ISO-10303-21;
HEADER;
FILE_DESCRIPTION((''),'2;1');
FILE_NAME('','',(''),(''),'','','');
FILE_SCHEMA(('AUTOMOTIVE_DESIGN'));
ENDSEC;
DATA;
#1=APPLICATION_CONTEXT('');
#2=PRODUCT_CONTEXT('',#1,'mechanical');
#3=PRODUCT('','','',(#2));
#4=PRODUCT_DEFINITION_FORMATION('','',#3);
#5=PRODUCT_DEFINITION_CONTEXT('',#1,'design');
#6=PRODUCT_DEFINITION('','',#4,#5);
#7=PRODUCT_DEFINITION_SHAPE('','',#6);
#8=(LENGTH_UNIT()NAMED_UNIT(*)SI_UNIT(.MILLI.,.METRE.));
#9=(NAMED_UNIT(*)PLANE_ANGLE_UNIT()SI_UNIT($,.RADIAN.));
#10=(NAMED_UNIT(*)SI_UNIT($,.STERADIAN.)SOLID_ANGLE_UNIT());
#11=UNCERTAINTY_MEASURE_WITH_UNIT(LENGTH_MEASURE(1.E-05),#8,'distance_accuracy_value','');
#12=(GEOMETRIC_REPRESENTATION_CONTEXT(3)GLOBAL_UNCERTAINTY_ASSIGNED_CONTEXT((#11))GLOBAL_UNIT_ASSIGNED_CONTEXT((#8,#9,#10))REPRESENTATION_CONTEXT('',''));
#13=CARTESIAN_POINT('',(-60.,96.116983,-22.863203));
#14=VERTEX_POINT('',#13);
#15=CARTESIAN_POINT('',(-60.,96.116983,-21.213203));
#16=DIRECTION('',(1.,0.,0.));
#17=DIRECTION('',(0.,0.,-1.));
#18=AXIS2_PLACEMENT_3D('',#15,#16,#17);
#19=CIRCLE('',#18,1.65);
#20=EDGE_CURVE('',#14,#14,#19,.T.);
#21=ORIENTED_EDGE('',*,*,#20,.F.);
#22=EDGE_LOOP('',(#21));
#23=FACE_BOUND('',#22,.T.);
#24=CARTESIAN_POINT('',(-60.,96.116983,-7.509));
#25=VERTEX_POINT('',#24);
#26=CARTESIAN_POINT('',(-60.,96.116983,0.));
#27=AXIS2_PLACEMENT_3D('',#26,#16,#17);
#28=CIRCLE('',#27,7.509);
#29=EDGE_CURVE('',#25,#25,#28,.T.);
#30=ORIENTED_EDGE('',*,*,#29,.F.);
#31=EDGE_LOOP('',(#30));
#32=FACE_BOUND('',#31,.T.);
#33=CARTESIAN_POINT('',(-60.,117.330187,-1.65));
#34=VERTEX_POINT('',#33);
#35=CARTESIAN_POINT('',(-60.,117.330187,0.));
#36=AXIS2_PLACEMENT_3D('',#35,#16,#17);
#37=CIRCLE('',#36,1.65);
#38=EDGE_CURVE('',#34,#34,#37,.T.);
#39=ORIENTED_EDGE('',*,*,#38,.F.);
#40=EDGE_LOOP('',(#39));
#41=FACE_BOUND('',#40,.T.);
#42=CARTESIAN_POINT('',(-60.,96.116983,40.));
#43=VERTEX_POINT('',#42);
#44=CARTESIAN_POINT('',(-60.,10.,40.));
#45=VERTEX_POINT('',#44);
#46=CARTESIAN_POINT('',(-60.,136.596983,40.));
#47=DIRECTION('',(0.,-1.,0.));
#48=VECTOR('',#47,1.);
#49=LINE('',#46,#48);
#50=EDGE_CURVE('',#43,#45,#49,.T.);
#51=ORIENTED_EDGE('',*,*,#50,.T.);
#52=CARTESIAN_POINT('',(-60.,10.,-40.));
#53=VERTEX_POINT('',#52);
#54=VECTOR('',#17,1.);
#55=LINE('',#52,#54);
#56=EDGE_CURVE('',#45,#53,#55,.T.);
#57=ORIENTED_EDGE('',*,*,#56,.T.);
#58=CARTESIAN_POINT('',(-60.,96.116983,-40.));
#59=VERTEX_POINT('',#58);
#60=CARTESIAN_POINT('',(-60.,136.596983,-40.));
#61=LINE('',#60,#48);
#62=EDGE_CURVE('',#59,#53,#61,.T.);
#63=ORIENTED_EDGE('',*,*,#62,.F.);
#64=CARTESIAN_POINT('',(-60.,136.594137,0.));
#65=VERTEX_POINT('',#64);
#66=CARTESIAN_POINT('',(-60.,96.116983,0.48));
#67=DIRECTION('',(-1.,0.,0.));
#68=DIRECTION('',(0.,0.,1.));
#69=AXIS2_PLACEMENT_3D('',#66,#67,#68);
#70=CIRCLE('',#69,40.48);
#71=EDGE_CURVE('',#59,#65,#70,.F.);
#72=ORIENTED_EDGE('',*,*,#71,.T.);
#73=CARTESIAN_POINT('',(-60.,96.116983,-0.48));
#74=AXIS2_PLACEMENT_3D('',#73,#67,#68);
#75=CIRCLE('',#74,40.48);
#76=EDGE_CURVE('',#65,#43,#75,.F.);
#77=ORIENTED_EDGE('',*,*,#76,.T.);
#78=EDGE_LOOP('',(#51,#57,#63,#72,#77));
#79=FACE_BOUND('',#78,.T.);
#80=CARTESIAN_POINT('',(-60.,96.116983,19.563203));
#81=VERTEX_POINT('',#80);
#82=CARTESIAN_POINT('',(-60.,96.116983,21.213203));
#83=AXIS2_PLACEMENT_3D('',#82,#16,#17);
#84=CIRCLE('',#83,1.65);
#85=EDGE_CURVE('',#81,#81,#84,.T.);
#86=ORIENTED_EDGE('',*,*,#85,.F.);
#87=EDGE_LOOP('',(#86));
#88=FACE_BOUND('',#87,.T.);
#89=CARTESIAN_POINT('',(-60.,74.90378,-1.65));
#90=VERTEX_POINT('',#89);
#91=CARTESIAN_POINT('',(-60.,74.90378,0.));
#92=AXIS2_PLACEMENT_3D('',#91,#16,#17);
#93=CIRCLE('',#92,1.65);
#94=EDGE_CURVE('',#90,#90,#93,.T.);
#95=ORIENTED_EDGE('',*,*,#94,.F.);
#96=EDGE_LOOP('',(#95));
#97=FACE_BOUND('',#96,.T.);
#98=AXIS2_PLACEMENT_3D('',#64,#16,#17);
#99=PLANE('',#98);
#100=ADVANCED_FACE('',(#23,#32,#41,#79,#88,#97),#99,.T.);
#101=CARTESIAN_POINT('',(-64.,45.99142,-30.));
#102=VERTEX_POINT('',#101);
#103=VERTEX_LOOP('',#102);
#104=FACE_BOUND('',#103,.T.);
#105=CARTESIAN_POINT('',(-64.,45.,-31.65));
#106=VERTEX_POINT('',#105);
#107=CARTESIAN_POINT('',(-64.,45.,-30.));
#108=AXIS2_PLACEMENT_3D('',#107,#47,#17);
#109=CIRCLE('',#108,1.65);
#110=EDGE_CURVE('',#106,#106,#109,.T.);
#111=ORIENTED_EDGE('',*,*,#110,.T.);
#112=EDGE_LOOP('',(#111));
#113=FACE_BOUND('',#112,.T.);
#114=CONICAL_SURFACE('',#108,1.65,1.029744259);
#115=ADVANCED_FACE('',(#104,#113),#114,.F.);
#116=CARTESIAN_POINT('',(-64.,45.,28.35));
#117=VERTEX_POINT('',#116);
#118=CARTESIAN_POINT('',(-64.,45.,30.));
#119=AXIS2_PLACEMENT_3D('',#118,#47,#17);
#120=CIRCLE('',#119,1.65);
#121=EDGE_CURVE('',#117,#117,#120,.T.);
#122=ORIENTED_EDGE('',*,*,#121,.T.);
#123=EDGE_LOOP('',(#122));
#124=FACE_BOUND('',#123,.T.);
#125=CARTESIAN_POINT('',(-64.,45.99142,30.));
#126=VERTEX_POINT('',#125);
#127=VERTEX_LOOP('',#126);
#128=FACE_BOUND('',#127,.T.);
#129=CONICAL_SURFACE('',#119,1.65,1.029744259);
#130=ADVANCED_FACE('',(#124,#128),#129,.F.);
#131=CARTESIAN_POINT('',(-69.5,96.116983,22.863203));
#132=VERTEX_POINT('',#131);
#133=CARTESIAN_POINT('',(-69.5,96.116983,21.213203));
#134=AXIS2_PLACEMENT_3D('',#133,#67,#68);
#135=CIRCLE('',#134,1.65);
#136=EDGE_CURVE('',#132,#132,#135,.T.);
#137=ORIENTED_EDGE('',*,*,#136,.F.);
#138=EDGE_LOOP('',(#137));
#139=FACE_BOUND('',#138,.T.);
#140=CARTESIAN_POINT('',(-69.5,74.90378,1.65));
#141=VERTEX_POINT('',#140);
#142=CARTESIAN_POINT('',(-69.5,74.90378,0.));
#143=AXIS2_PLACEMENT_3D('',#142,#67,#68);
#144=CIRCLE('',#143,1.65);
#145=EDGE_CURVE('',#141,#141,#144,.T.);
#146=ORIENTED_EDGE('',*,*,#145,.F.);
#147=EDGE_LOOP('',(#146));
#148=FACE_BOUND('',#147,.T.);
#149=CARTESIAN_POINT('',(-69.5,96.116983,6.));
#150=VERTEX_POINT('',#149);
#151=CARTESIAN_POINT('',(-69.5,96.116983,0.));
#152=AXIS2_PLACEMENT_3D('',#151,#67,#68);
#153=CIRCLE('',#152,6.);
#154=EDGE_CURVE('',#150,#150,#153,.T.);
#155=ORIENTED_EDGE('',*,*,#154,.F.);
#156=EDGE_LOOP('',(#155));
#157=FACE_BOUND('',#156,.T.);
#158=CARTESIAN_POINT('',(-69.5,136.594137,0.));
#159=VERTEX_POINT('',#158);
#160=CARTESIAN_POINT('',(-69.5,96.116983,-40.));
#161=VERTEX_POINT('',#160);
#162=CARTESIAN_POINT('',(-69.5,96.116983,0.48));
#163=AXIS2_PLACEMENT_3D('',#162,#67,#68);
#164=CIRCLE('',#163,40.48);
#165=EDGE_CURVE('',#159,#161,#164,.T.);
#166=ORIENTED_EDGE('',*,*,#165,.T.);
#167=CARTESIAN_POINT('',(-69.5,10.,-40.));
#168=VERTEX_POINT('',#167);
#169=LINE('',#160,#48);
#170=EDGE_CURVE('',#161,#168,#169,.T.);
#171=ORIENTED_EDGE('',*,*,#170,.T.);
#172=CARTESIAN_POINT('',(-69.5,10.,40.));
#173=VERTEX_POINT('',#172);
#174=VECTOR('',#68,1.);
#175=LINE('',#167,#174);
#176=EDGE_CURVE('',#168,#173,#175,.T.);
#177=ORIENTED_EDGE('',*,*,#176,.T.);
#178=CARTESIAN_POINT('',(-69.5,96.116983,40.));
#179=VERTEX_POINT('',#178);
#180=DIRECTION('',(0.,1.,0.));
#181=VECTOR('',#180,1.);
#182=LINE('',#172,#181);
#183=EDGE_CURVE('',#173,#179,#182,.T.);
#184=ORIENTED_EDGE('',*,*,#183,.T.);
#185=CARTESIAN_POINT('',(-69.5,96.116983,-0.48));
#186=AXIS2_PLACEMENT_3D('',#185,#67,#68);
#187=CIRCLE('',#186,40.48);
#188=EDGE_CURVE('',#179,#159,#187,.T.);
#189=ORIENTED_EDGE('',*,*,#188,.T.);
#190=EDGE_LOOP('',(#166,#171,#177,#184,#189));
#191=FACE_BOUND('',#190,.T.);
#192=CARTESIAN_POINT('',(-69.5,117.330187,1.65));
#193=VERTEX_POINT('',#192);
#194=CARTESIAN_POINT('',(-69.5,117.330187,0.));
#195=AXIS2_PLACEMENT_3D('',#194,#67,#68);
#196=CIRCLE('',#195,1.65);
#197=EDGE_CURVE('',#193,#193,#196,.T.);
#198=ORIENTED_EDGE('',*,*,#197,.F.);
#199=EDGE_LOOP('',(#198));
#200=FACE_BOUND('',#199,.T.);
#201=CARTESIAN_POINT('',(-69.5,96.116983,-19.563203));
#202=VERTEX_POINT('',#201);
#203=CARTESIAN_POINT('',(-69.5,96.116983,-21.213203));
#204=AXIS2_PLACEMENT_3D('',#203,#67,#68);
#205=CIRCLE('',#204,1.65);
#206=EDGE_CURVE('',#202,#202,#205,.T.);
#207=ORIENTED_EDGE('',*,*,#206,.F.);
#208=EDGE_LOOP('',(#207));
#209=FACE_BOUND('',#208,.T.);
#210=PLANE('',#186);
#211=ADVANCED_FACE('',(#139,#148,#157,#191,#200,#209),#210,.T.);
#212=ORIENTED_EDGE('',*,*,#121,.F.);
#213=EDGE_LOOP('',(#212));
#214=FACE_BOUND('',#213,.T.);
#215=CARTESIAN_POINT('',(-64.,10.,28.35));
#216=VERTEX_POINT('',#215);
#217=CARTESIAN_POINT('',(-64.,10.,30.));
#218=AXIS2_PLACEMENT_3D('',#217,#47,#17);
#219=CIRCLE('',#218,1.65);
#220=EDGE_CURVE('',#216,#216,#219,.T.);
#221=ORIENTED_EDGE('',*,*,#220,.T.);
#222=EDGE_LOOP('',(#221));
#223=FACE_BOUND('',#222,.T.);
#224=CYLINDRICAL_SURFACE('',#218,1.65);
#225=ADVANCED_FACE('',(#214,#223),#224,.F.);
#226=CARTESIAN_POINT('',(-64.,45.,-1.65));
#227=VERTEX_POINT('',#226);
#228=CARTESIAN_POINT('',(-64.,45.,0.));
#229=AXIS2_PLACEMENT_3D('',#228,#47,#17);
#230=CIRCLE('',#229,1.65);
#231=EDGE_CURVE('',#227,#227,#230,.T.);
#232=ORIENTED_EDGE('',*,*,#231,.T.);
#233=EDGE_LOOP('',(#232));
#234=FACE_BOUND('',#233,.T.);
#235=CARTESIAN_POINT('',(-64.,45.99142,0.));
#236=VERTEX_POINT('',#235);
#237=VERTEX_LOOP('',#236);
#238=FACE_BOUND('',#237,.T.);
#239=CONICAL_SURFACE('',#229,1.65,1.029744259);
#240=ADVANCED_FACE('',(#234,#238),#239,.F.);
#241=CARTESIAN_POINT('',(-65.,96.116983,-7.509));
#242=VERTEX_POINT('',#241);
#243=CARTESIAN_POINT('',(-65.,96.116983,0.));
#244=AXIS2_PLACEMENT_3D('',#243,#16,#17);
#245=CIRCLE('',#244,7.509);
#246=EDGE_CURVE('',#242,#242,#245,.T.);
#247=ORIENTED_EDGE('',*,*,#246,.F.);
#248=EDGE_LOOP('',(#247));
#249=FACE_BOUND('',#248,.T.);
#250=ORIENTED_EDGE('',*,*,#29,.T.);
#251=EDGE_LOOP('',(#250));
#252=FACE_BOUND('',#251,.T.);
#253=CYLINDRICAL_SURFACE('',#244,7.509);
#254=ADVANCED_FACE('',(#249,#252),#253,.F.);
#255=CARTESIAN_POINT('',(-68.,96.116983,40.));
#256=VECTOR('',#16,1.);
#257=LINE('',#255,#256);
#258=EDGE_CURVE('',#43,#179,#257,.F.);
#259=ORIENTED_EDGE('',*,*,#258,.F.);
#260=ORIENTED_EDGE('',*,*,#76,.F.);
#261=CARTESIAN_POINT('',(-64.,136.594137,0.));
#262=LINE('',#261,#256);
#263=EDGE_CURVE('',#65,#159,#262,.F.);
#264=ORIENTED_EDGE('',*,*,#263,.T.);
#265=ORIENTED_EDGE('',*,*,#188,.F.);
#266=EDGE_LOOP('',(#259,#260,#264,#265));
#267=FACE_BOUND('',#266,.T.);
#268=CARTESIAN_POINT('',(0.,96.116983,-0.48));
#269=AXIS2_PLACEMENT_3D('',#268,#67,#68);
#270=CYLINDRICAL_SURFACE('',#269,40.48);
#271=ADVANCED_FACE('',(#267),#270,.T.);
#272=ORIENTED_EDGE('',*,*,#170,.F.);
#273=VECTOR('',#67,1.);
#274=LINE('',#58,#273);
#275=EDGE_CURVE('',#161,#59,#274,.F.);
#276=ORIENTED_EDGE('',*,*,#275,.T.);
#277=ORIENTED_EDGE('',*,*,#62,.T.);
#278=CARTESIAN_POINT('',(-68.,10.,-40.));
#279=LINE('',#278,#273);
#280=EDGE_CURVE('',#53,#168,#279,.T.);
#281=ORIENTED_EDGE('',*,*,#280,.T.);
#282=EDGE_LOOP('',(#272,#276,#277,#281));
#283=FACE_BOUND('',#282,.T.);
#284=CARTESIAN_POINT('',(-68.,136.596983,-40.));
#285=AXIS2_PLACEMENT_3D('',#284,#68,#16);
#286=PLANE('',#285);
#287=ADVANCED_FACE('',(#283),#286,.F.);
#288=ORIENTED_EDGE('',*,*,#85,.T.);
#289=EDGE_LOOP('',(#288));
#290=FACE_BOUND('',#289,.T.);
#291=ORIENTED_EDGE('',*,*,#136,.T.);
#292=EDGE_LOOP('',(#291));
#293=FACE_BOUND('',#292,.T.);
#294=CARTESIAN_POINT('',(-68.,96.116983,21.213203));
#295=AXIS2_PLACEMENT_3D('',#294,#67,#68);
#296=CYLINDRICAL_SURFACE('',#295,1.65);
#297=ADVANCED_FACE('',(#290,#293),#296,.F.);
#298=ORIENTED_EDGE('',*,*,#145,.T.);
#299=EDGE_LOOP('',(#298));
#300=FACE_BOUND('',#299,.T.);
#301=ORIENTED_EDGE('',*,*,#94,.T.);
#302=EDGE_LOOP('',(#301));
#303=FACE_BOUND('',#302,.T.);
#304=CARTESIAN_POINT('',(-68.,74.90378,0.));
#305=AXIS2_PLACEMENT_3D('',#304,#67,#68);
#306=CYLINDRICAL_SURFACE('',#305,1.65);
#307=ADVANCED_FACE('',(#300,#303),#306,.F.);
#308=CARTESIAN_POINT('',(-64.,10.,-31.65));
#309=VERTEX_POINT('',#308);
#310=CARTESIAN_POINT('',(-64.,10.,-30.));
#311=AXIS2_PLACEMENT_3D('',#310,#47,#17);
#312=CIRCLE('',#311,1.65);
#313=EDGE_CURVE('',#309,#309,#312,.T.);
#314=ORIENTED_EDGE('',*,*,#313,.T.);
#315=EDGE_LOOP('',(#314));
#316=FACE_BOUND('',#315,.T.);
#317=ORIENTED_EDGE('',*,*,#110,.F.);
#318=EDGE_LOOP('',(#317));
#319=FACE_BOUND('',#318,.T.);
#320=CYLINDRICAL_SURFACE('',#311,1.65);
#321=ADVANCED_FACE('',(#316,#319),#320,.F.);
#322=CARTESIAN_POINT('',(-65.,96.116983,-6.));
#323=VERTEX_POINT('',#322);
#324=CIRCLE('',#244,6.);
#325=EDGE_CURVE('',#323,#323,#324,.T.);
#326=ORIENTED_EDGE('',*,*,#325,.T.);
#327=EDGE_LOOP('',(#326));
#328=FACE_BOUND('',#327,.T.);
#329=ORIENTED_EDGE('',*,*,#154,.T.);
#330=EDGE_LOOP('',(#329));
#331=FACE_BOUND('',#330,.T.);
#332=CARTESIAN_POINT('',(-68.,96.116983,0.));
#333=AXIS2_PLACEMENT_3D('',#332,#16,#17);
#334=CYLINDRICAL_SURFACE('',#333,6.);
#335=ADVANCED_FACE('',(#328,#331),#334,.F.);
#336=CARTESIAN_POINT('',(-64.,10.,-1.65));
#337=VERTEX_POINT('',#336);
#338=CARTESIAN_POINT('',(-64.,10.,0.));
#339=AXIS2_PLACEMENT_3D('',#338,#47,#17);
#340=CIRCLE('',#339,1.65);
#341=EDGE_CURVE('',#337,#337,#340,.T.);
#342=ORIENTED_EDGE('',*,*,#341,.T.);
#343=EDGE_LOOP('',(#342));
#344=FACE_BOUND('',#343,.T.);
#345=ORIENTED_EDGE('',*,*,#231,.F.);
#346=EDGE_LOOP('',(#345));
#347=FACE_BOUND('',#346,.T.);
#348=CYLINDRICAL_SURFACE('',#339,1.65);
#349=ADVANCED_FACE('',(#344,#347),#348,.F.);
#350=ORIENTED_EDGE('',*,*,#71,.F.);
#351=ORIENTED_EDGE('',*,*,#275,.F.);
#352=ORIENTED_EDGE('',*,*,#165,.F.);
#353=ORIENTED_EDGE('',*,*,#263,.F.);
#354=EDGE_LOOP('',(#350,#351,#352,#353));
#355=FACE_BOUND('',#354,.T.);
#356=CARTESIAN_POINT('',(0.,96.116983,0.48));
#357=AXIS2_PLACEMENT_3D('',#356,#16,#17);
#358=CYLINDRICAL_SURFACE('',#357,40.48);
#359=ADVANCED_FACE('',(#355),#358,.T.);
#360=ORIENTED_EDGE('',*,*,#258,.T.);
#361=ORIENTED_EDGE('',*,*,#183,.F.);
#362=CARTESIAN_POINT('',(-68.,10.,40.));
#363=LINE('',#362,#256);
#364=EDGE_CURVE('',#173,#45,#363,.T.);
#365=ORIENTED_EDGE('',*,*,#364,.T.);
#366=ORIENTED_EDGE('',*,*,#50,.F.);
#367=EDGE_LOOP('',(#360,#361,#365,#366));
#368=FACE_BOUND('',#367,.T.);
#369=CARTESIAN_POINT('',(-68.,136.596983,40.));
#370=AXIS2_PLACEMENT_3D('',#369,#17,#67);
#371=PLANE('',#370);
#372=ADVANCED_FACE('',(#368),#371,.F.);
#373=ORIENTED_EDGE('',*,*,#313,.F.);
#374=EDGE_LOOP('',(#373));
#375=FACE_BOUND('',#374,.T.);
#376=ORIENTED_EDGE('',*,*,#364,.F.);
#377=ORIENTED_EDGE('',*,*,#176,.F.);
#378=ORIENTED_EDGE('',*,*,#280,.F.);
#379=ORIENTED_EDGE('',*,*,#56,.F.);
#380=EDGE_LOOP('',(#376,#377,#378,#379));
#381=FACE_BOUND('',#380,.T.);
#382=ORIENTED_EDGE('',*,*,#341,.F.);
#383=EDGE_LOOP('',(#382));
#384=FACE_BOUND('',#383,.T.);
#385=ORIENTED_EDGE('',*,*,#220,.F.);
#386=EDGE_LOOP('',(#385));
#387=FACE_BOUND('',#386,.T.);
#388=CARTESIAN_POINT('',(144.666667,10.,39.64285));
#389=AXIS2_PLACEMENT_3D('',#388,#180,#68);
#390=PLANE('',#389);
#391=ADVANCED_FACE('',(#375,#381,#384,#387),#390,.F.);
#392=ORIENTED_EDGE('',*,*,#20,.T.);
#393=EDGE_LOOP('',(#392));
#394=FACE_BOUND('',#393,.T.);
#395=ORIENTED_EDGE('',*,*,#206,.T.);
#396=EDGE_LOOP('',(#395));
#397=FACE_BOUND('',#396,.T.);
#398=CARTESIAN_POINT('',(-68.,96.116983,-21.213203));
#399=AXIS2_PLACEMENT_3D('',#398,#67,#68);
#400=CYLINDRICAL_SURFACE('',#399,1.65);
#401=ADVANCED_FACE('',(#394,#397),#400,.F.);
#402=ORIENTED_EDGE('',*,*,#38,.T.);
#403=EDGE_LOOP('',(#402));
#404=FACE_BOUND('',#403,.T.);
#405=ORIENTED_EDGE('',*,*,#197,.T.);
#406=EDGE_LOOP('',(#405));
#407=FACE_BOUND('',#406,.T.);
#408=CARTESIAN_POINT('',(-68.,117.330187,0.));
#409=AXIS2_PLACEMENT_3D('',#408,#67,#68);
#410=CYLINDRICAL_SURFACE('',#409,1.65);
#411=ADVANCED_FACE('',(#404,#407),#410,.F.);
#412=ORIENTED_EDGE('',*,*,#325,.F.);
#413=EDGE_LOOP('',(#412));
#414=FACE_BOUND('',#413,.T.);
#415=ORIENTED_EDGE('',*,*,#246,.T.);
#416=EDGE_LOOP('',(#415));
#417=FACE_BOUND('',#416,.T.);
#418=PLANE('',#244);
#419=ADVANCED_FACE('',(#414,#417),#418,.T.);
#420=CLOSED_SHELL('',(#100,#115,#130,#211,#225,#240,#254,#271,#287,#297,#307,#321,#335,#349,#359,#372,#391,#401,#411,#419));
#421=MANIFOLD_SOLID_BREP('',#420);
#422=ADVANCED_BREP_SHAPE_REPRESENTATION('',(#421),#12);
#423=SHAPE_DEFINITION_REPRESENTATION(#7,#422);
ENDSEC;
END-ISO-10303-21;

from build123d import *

# Parameters (mm, degrees)
STOCK_NEW_TRACKER_1_START = -68
STOCK_NEW_TRACKER_1_DEPTH = 8
SKETCH1_R                 = 7.5089999999999995
CUT_EXTRUDE1_DEPTH        = 5
SKETCH2_R                 = 6.000000000000002
CUT_EXTRUDE2_DEPTH        = 143.41825129942816
M4X0_7_TAPPED_HOLE1_D     = 3.3
M4X0_7_TAPPED_HOLE1_DEPTH = 35
M4X0_7_TAPPED_HOLE1_TIP   = 0.9914200213954745
M4X0_7_TAPPED_HOLE2_D     = 3.3
SKETCH10_R                = 1.6499999999999984
SKETCH10_R_2              = 1.6499999999999986
SKETCH10_R_3              = 6.000000000000005
BOSS_EXTRUDE1_DEPTH       = 1.5


# Read off the part's stored shape, not the designer's step: Stock-New_Tracker-1
with BuildPart() as part:
    # Stock-New_Tracker-1 outline → Stock-New_Tracker-1 (new body)
    with BuildSketch(Plane.YZ.offset(STOCK_NEW_TRACKER_1_START)):
        with BuildLine():
            Line((10, 40.00000001), (10, -40.00000001))
            Line((10, -40.00000001), (96.116983094, -40.00000001))
            ThreePointArc((96.116983094, -40.00000001), (124.570453888, -28.312888017), (136.594137145, 0))
            ThreePointArc((136.594137145, 0), (124.570453888, 28.312888017), (96.116983094, 40.00000001))
            Line((96.116983094, 40.00000001), (10, 40.00000001))
        make_face()
    extrude(amount=STOCK_NEW_TRACKER_1_DEPTH)

    # Sketch1 → Cut-Extrude1 (cut)
    with BuildSketch(Plane(origin=(-60, 0, 1.041e-14), x_dir=(-1.7e-16, 0, -1), z_dir=(1, 0, -1.7e-16))):
        with Locations((0, 96.11698309434121)):
            Circle(SKETCH1_R)
    extrude(amount=-CUT_EXTRUDE1_DEPTH, mode=Mode.SUBTRACT)

    # Sketch2 → Cut-Extrude2 (cut, through all)
    with BuildSketch(Plane(origin=(-65, 0, 1.128e-14), x_dir=(-1.7e-16, 0, -1), z_dir=(1, 0, -1.7e-16))):
        with Locations((0, 96.11698309434121)):
            Circle(SKETCH2_R)
    extrude(amount=-CUT_EXTRUDE2_DEPTH, mode=Mode.SUBTRACT)

    # M4x0.7 Tapped Hole1
    with Locations(Plane(origin=(0, 10, 0), x_dir=(-1, 0, 0), z_dir=(0, -1, 0))):
        with Locations((64, -30), (64, 0), (64, 30)):
            Hole(M4X0_7_TAPPED_HOLE1_D / 2, depth=M4X0_7_TAPPED_HOLE1_DEPTH)
            with Locations((0, 0, -(M4X0_7_TAPPED_HOLE1_DEPTH + M4X0_7_TAPPED_HOLE1_TIP / 2))):  # 118° drill point
                Cone(0, M4X0_7_TAPPED_HOLE1_D / 2, M4X0_7_TAPPED_HOLE1_TIP, mode=Mode.SUBTRACT)

    # M4x0.7 Tapped Hole2 (through all)
    with Locations(Plane.ZY.offset(67.99999999999999)):
        with Locations((0, 74.903779659), (-21.213203436, 96.116983094), (0, 117.33018653), (21.213203436, 96.116983094)):
            Hole(M4X0_7_TAPPED_HOLE2_D / 2)

    # Sketch10 → Boss-Extrude1 (add)
    with BuildSketch(Plane.ZY.offset(67.99999999999999)):
        with BuildLine():
            Line((40.00000000999996, 10), (40.00000000999996, 96.11698309434121))
            ThreePointArc((40.00000000999996, 96.11698309434121), (28.312888017242308, 124.57045388794387), (-3.291e-14, 136.59413714461505))
            ThreePointArc((-3.291e-14, 136.59413714461505), (-28.31288801724237, 124.57045388794387), (-40.00000001000003, 96.11698309434121))
            Line((-40.00000001000003, 96.11698309434121), (-40.00000001000003, 10))
            Line((-40.00000001000003, 10), (40.00000000999996, 10))
        make_face()
        with Locations((1.335e-14, 117.33018652993762)):
            Circle(SKETCH10_R, mode=Mode.SUBTRACT)
        with Locations((21.213203435596416, 96.11698309434121)):
            Circle(SKETCH10_R_2, mode=Mode.SUBTRACT)
        with Locations(Location((0, 96.11698309434121, 0), (0, 0, 180))):
            Circle(SKETCH10_R_3, mode=Mode.SUBTRACT)
        with Locations((-21.213203435596416, 96.11698309434121)):
            Circle(SKETCH10_R_2, mode=Mode.SUBTRACT)
        with Locations((1.513e-14, 74.9037796587448)):
            Circle(SKETCH10_R, mode=Mode.SUBTRACT)
    extrude(amount=BOSS_EXTRUDE1_DEPTH)


solid = part.part
